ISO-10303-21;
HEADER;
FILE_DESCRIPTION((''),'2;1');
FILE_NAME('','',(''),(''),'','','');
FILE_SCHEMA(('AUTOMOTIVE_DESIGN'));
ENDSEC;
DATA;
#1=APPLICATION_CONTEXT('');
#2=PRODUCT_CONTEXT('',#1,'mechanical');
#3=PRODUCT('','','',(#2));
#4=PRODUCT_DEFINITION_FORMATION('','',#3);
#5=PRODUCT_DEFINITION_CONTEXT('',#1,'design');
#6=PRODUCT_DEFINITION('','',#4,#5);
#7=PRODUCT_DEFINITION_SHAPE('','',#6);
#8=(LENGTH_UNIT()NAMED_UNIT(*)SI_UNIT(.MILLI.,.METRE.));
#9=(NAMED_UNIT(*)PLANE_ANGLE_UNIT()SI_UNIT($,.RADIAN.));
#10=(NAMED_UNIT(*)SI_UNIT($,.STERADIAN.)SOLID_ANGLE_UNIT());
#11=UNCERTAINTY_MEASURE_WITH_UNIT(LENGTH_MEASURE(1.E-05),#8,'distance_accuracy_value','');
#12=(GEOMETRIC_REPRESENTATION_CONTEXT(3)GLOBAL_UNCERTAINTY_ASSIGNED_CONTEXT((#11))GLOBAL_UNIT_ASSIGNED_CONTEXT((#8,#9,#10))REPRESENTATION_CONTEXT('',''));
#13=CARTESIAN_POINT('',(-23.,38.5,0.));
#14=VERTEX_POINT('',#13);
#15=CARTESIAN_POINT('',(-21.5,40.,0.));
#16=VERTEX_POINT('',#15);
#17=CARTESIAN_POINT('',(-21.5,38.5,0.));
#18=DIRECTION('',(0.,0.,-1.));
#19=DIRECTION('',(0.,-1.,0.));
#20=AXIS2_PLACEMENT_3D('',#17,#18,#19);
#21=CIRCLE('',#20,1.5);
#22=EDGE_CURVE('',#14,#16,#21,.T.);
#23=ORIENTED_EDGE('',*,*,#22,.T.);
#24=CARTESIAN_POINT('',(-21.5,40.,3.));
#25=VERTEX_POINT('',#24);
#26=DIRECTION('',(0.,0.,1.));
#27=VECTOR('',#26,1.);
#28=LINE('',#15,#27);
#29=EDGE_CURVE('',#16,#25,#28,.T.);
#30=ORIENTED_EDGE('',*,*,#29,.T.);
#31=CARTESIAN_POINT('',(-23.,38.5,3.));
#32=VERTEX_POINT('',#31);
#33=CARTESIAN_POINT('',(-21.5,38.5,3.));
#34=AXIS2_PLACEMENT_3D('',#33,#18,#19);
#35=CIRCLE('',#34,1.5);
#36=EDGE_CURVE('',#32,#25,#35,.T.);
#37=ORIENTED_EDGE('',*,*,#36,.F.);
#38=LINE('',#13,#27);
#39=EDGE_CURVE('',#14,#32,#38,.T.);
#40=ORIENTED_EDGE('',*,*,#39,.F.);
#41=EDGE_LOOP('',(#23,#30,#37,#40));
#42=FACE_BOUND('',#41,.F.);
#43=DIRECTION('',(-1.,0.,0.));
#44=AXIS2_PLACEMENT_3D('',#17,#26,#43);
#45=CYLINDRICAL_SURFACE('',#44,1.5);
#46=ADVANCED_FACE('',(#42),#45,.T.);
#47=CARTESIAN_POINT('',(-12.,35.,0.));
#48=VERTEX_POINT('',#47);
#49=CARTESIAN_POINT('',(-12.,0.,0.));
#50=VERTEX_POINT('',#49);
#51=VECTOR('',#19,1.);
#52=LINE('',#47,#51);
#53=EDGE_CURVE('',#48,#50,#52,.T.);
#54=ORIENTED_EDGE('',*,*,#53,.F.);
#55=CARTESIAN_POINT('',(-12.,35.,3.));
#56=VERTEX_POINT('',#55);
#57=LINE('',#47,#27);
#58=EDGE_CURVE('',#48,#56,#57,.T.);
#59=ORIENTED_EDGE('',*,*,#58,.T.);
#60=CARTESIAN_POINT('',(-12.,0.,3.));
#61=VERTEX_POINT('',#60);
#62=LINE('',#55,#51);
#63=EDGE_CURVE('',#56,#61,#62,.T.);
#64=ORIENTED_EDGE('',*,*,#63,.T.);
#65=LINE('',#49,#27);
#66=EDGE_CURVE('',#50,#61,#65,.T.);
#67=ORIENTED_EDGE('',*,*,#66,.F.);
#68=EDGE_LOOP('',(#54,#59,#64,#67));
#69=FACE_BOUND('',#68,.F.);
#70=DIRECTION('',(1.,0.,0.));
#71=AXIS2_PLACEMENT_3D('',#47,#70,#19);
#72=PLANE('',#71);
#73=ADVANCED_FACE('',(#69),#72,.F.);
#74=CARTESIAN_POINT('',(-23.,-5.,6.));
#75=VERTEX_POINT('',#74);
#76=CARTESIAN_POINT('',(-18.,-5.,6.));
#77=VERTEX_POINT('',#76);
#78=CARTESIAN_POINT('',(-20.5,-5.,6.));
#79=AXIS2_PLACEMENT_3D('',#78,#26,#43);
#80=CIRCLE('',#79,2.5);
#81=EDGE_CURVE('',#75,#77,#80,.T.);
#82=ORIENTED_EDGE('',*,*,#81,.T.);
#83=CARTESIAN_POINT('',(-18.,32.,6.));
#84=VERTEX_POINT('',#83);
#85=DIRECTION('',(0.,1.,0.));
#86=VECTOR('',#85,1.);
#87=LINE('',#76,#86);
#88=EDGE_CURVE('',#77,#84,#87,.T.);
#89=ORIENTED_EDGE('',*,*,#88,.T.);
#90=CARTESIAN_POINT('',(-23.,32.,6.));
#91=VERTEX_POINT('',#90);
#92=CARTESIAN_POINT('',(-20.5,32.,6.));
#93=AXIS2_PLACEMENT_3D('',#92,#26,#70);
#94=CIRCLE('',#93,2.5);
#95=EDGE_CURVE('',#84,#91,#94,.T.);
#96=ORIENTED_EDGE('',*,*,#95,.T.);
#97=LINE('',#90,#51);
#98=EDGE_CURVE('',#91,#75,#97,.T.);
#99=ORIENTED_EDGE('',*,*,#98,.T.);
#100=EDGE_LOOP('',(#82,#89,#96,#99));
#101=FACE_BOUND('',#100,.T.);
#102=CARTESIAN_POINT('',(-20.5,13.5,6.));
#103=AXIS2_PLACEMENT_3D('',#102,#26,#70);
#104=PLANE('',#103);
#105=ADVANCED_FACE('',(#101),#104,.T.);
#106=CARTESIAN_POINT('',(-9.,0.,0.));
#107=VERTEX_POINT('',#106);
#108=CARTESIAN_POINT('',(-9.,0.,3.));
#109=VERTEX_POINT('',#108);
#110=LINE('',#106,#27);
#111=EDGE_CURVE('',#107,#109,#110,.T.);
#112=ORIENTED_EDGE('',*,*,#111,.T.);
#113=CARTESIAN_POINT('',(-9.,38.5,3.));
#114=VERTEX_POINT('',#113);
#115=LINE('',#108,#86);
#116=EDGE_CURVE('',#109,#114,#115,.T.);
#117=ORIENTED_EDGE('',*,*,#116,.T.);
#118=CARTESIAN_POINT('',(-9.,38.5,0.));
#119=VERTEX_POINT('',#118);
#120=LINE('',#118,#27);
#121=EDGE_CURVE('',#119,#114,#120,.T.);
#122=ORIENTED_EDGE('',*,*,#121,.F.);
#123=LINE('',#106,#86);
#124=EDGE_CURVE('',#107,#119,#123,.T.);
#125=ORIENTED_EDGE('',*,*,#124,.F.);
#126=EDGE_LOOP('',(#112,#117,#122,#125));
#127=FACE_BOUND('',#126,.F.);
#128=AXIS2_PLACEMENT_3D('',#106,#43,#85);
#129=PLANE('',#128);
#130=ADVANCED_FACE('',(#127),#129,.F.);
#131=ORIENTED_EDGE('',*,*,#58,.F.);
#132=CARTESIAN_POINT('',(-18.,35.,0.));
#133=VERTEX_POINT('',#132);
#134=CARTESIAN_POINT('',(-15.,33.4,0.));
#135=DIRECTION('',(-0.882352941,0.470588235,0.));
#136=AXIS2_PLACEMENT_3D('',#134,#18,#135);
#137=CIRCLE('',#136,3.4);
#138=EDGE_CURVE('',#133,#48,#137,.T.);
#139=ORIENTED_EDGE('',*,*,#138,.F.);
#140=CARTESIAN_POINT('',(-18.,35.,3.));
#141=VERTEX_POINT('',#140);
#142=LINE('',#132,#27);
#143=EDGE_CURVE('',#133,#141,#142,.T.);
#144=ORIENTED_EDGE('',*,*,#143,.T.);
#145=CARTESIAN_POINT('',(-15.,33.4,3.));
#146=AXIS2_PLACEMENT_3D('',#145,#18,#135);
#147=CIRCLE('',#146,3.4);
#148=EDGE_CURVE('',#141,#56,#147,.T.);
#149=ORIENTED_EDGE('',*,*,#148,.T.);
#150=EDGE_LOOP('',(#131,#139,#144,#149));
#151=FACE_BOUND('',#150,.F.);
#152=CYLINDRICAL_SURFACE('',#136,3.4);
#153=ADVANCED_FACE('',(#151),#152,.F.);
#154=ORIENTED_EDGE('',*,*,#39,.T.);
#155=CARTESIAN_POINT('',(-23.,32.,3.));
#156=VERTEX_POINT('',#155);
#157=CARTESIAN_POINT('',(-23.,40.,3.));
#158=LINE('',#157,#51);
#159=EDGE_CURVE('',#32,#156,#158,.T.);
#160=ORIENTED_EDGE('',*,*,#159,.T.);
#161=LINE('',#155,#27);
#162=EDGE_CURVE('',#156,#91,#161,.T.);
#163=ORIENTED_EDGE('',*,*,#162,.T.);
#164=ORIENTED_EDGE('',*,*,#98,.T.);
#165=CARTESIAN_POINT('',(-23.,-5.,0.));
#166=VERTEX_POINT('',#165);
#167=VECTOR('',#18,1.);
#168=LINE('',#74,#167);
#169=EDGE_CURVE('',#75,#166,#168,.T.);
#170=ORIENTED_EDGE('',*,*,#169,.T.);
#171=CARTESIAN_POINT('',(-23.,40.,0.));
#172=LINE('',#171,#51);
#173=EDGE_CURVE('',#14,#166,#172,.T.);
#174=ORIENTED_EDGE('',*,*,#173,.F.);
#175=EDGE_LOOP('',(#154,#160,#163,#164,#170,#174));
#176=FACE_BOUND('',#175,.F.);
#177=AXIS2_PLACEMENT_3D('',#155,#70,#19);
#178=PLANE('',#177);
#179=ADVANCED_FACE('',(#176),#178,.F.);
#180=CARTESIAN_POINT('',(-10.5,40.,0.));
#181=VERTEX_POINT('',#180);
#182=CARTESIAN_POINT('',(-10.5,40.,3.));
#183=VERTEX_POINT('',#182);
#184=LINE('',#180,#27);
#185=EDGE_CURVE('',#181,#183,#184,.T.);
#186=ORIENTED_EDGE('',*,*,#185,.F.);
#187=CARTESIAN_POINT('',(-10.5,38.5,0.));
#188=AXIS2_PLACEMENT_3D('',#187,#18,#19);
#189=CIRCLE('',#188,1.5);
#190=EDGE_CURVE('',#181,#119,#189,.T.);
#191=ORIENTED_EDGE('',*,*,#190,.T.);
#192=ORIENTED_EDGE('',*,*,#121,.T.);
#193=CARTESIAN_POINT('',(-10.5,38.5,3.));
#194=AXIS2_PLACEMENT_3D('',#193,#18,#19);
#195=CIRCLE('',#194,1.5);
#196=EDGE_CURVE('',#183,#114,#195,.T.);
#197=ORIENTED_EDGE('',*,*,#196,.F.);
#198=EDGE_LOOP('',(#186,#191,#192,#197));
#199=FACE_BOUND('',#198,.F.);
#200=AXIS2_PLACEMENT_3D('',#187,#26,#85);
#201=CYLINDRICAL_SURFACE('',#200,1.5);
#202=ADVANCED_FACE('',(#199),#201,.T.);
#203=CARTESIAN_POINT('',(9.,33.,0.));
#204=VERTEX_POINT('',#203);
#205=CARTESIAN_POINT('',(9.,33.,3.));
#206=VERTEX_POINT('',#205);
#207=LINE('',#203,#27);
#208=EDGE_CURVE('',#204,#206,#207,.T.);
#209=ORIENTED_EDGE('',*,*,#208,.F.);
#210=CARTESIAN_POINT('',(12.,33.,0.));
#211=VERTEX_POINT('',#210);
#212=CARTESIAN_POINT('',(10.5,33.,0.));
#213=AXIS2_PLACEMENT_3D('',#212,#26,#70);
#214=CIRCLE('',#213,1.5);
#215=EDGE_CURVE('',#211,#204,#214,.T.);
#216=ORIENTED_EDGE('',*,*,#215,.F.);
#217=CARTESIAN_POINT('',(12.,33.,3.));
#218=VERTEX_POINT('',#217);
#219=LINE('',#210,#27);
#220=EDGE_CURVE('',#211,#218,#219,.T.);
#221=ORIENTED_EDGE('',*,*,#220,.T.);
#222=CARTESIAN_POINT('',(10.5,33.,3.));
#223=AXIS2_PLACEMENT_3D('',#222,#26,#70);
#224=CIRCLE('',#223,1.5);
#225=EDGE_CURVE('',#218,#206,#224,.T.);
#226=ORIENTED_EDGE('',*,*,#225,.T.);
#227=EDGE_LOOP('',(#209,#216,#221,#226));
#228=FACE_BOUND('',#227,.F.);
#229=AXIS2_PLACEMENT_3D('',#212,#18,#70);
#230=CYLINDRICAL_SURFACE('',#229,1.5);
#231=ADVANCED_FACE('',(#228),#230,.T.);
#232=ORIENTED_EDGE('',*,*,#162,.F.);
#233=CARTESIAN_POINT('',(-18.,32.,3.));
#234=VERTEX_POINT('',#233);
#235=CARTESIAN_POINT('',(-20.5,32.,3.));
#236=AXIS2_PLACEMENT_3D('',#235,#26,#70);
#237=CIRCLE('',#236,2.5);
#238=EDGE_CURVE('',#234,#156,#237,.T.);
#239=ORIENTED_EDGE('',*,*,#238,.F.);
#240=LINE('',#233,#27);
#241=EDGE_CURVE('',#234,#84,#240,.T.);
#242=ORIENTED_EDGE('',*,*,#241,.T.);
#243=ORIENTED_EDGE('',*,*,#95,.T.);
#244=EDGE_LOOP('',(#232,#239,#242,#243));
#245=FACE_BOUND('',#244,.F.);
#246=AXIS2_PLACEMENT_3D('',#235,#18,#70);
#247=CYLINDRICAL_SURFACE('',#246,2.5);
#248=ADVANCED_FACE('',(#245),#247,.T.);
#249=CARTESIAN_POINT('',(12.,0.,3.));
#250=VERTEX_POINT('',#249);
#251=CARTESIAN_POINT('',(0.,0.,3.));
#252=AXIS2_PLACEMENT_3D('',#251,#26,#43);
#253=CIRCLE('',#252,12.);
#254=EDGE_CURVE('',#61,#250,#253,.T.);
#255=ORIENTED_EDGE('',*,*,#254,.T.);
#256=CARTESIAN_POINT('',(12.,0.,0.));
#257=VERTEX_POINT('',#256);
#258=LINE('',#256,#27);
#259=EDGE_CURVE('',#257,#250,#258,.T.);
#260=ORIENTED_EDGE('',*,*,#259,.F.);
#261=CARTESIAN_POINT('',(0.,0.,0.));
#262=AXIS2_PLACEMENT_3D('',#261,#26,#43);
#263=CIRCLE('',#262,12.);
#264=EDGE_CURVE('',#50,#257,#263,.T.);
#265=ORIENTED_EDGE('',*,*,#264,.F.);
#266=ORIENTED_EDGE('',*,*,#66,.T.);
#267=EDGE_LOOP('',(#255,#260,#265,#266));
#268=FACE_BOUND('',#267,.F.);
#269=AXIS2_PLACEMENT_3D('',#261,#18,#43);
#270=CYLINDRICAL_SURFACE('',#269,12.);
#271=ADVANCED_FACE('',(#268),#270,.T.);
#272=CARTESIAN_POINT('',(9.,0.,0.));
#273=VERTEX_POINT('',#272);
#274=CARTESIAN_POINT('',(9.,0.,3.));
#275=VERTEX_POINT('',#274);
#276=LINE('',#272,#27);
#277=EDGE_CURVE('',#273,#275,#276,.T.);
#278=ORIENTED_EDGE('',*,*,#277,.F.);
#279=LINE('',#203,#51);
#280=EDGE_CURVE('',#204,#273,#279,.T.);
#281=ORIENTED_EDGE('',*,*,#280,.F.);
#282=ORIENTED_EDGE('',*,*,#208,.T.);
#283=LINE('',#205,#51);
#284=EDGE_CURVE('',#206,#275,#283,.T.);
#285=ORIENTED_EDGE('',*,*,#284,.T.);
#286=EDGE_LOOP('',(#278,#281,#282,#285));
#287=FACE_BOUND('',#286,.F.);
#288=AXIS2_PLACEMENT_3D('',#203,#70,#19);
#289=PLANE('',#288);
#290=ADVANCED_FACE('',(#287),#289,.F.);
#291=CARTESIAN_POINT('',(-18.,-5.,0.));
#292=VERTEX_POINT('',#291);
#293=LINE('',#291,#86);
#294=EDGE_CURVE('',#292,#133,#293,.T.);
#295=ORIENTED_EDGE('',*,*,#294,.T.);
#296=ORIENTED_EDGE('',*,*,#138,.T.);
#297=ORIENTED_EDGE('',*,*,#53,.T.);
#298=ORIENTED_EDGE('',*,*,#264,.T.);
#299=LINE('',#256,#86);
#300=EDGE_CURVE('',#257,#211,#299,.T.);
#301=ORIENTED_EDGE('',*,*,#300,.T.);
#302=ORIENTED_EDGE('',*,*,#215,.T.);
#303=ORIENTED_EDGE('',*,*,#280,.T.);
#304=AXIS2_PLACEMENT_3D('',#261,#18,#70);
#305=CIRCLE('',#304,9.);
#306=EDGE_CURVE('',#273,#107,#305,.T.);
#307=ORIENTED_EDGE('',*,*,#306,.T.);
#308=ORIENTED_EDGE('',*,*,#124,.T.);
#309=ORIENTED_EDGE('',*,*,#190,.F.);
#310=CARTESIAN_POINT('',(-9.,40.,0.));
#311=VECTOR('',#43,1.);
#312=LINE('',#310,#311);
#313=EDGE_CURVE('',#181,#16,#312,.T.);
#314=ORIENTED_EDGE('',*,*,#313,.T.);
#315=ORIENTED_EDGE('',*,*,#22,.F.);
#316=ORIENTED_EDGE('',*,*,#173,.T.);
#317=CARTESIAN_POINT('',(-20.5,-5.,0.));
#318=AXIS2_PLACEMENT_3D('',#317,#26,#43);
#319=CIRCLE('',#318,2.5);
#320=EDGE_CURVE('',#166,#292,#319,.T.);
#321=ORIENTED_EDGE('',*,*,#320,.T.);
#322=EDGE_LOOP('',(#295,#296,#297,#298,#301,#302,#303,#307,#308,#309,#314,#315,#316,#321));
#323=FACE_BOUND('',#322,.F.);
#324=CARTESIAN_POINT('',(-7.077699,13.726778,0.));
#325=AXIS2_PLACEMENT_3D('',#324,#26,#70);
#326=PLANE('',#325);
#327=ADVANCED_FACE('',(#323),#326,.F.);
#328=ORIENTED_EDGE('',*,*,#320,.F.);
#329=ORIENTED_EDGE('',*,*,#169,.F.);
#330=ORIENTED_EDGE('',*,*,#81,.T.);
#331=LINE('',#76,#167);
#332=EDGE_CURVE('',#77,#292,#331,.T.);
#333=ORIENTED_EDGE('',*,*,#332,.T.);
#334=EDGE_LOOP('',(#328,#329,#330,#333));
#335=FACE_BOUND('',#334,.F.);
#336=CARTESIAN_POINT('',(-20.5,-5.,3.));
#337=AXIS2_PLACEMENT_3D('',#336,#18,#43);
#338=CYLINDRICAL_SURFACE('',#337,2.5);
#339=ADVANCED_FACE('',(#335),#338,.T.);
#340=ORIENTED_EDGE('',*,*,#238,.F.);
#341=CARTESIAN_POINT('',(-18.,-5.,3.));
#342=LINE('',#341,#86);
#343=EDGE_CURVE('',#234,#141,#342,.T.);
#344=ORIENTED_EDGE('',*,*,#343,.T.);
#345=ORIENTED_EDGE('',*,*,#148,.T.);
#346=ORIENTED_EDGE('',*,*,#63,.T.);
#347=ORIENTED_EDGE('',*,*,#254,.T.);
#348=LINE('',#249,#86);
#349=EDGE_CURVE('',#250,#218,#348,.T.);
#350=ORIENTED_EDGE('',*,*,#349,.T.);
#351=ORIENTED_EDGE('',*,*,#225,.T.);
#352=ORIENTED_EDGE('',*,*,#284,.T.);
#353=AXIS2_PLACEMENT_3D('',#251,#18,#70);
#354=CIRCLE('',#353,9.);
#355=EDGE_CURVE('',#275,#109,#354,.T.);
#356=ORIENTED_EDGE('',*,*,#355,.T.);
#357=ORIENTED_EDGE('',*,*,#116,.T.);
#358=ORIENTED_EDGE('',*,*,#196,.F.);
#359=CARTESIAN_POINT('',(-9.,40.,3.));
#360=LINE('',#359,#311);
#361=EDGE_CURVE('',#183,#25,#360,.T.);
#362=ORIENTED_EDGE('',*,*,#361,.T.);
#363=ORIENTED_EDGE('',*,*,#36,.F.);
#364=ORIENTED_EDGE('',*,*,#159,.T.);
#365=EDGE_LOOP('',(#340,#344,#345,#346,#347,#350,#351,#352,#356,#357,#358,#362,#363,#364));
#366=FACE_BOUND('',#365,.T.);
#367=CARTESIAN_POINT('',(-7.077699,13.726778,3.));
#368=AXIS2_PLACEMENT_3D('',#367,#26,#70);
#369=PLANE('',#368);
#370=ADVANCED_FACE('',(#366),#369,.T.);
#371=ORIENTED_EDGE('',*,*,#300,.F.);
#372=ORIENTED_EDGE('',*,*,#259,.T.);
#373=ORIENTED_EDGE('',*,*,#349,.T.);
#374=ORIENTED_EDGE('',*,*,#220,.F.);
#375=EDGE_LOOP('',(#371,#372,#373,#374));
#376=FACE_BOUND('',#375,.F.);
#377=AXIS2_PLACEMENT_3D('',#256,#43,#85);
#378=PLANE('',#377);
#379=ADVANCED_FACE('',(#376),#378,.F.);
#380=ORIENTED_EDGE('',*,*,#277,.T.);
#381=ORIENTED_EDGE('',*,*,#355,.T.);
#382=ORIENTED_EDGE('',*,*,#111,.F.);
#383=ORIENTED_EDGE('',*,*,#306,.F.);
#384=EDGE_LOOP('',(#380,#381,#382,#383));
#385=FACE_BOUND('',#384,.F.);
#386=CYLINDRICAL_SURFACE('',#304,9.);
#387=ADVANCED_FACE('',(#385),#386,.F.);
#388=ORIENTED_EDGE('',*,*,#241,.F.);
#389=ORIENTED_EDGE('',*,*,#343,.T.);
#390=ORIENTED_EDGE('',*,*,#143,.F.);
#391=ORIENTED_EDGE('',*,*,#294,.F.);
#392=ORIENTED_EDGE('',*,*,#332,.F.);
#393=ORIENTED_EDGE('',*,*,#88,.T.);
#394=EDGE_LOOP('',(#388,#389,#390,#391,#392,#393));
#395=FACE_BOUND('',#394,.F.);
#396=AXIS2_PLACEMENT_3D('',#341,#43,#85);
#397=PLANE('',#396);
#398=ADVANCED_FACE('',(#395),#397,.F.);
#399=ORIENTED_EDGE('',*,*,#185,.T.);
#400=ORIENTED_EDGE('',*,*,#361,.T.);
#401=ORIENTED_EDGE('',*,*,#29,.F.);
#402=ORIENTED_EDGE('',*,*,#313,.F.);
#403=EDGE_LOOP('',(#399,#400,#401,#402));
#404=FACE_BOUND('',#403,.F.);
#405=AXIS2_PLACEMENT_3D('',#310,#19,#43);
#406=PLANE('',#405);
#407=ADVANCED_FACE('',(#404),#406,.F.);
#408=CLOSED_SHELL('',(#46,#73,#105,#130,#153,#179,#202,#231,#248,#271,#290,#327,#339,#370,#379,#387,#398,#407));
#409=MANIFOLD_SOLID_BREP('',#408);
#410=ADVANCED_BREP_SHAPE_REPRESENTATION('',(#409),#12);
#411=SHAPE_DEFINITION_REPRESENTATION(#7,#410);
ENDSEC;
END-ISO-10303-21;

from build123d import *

# Parameters (mm, degrees)
F1_DEPTH = 3
F3_DEPTH = 3
F4_R     = 1.5


with BuildPart() as f1:
    # F0 (on Top) → F1 (new body)
    with BuildSketch(Plane.XY):
        with BuildLine():
            ThreePointArc((9, 0), (0, -9), (-9, 0))
            Line((-9, 0), (-9, 40))
            Line((-9, 40), (-23, 40))
            Line((-23, 40), (-23, -5))
            ThreePointArc((-23, -5), (-20.5, -7.5), (-18, -5))
            Line((-18, -5), (-18, 35))
            ThreePointArc((-18, 35), (-15, 36.8), (-12, 35))
            Line((-12, 35), (-12, 0))
            ThreePointArc((-12, 0), (0, -12), (12, 0))
            Line((12, 0), (12, 33))
            ThreePointArc((12, 33), (10.5, 34.5), (9, 33))
            Line((9, 33), (9, 0))
        make_face()
    extrude(amount=F1_DEPTH)

    # F2 (on face) → F3 (join)
    with BuildSketch(Plane.XY.offset(3)):
        with BuildLine():
            Line((-18, -5), (-18, 32))
            ThreePointArc((-18, 32), (-20.5, 34.5), (-23, 32))
            Line((-23, 32), (-23, -5))
            ThreePointArc((-23, -5), (-20.5, -7.5), (-18, -5))
        make_face()
    extrude(amount=F3_DEPTH)

    # F4
    f4_edges = [f1.edges().sort_by_distance(p)[0] for p in [
        (-23, 40, 1.5),
        (-9, 40, 1.5),
    ]]
    fillet(f4_edges, radius=F4_R)


solid = f1.part
